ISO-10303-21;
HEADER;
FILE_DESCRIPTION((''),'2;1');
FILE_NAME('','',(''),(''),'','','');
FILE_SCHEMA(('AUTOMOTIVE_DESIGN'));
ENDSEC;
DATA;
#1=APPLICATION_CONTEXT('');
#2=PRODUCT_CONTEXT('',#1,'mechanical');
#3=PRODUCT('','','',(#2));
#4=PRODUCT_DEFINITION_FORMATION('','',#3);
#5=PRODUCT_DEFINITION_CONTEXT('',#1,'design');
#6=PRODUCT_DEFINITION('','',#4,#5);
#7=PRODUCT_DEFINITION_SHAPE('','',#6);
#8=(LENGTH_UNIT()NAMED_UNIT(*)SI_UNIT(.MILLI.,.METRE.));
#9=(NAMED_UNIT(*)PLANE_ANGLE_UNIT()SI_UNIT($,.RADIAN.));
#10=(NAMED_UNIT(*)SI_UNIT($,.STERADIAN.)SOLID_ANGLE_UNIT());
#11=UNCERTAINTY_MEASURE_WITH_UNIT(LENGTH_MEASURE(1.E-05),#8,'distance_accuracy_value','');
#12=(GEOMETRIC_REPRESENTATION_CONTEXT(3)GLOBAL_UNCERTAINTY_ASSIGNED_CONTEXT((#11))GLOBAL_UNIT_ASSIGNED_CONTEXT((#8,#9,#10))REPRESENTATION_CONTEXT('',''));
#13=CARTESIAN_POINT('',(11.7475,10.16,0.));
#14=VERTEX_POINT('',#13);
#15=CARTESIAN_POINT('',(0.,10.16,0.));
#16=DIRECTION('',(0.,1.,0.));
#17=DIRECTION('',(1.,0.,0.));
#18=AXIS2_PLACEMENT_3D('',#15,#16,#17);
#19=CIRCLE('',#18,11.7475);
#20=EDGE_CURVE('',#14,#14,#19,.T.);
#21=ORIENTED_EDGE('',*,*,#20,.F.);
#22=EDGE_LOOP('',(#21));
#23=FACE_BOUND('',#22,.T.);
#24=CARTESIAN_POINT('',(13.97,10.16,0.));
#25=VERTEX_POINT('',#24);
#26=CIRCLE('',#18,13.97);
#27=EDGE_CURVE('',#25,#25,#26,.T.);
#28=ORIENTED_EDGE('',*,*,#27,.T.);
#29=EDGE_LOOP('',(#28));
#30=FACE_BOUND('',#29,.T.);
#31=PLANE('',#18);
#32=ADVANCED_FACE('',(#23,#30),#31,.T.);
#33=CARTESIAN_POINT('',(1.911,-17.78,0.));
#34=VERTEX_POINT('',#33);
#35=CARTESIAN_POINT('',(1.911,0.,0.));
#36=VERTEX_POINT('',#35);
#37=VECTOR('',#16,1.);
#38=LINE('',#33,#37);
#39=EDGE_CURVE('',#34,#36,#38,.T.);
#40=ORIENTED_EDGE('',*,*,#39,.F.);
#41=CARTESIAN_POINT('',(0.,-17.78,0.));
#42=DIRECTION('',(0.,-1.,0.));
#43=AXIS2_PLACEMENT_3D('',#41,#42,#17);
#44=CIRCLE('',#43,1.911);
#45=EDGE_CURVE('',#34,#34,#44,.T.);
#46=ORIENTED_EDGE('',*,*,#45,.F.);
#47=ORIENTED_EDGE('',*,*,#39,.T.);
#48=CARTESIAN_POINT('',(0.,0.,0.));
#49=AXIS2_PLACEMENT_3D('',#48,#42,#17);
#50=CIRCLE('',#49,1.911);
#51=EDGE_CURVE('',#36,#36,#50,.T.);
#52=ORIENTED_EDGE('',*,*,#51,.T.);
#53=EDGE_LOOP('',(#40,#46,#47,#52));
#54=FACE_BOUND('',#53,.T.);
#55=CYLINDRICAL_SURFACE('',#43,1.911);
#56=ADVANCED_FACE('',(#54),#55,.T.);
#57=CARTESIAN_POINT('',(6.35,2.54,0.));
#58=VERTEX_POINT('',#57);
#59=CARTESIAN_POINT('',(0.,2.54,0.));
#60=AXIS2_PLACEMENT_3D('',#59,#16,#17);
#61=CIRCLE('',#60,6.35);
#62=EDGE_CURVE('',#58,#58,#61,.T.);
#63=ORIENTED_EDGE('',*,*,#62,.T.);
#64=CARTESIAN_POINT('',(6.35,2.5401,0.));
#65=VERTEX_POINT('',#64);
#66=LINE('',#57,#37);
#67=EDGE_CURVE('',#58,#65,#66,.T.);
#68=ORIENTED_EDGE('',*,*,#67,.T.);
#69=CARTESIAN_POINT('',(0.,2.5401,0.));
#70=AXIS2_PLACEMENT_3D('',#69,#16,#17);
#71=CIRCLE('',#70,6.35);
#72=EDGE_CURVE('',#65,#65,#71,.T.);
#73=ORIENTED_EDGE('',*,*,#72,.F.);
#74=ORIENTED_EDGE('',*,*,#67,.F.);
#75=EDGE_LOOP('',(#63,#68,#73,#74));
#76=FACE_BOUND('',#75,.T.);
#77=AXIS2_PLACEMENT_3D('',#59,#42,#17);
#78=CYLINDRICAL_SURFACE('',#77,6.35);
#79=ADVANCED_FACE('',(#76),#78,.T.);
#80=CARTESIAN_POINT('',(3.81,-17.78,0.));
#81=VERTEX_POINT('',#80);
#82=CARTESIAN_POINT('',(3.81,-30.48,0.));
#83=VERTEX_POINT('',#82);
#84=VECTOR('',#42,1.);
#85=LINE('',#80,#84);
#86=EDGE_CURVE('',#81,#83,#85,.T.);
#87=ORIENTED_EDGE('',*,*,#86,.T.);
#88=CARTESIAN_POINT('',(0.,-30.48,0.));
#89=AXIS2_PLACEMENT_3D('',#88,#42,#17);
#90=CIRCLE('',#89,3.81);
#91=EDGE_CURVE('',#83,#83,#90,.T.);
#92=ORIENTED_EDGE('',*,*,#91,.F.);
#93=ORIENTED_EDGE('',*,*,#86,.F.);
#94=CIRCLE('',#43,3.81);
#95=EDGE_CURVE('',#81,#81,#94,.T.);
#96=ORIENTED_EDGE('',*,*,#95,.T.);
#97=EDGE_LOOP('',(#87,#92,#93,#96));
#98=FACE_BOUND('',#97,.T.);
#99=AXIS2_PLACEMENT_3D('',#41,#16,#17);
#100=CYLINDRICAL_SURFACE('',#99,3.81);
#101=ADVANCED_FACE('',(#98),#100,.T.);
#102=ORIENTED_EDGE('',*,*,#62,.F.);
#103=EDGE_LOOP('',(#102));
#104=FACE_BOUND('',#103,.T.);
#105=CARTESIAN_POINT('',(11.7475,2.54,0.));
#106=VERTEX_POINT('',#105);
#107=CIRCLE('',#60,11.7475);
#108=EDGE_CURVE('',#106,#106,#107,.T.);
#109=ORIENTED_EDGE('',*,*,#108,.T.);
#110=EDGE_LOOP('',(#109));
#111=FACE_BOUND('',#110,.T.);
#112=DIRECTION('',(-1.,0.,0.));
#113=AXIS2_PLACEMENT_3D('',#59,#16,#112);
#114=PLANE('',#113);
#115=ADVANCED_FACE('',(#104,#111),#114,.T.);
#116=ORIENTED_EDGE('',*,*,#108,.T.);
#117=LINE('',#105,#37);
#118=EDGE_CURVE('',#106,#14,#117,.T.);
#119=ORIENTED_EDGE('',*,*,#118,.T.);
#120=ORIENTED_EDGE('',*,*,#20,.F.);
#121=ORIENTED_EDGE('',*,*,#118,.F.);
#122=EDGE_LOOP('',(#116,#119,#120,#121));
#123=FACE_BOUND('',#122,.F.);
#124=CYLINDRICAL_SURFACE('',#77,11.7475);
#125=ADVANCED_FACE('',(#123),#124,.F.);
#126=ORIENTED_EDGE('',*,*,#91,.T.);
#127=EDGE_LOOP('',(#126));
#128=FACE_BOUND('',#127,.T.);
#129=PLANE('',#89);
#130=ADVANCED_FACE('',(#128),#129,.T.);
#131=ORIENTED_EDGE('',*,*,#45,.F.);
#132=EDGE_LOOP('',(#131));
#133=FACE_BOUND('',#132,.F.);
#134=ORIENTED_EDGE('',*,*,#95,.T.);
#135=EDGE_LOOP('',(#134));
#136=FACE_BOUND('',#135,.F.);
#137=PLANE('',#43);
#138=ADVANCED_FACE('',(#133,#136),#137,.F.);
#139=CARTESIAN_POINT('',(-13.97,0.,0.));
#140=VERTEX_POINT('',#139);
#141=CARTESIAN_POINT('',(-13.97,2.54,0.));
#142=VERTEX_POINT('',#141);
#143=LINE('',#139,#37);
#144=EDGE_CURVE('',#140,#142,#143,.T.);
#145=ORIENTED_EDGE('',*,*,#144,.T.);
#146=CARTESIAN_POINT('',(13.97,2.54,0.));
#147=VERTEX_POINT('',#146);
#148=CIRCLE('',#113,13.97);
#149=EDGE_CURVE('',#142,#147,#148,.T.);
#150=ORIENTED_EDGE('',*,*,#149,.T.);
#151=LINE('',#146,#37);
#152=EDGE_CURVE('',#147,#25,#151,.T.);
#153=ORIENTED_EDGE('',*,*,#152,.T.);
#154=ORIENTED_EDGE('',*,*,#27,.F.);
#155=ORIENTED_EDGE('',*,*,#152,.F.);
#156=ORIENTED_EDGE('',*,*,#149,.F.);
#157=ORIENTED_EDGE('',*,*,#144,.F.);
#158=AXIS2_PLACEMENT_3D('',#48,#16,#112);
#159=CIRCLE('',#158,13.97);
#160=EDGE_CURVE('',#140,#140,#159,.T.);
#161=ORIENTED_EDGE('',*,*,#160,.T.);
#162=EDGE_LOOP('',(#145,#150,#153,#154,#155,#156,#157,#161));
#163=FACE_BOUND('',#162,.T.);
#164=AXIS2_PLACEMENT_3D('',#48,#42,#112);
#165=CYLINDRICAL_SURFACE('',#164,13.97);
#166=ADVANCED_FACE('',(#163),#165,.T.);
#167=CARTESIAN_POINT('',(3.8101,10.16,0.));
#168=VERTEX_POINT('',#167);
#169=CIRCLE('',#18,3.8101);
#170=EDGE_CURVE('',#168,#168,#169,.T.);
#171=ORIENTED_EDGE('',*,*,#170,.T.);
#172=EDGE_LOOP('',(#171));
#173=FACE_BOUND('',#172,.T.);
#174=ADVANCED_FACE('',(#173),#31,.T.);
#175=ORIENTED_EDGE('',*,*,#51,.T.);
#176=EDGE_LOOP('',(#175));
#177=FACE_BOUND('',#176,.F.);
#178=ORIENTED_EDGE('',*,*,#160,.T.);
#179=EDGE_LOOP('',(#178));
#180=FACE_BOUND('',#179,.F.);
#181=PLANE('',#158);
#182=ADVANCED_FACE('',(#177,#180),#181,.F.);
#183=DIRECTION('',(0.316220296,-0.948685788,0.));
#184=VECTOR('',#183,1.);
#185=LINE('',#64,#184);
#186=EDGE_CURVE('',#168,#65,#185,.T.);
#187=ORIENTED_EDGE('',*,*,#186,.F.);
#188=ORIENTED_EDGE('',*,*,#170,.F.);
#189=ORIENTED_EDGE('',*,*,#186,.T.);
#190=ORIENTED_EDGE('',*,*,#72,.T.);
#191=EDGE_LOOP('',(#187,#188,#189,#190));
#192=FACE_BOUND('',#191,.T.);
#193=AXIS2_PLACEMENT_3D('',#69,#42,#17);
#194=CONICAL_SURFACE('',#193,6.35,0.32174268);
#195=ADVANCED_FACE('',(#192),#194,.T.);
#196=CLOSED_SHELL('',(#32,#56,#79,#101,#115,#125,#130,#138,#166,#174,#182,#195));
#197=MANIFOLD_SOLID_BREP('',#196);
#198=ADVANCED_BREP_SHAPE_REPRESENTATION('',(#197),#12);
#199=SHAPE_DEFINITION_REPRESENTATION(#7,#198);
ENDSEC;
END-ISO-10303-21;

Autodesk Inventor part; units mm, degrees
ref_plane "YZ Plane" through (0, 0, 0) normal (1, 0, 0) x (0, 1, 0)
ref_plane "XZ Plane" through (0, 0, 0) normal (0, 1, 0) x (-1, 0, 0)
ref_plane "XY Plane" through (0, 0, 0) normal (0, 0, 1) x (1, 0, 0)
sketch "Sketch1" plane through (0, 0, 0) normal (0, 1, 0) x (-1, 0, 0)
  circle A0 centre (0, 0) radius 13.97
  dimension "d0" = 27.94
extrude "Extrusion1" add sketch "Sketch1" along normal blind 2.54
sketch "Sketch2" plane through (0, 2.54, 0) normal (0, 1, 0) x (1, 0, 0)
  circle A0 centre (0, 0) radius 13.97
  circle A1 centre (0, 0) radius 11.7475
  dimension "d3" = 23.495
extrude "Extrusion2" add sketch "Sketch2" along normal blind 7.62
sketch "Sketch3" plane through (0, 2.54, 0) normal (0, 1, 0) x (1, 0, 0)
  circle A0 centre (0, 0) radius 6.35
  dimension "d6" = 12.7
extrude "Extrusion3" add sketch "Sketch3" along normal blind 7.62
chamfer "Chamfer1" distance 2.54 distance2 7.62 1 edges at (-6.35, 10.16, 0) measured on face at (-1.8127, 10.16, 0.4771)
sketch "Sketch4" plane through (0, 0, 0) normal (0, -1, 0) x (1, 0, 0)
  circle A0 centre (0, 0) radius 3.81
  dimension "d12" = 7.62
extrude "Extrusion4" add sketch "Sketch4" along normal blind 17.78
sketch "Sketch5" plane through (0, -17.78, 0) normal (0, -1, 0) x (1, 0, 0)
  circle A0 centre (0, 0) radius 1.911
  circle A1 centre (0, 0) radius 3.81
  circle A2 centre (0, 0) radius 1.911
extrude "Extrusion5" cut sketch "Sketch5" against normal blind 17.78
sketch "Sketch6" plane through (0, -17.78, 0) normal (0, -1, 0) x (1, 0, 0)
  circle A0 centre (0, 0) radius 3.81
  dimension "d17" = 7.62
extrude "Extrusion6" add sketch "Sketch6" along normal blind 12.7
properties part number "cap_20mL"
